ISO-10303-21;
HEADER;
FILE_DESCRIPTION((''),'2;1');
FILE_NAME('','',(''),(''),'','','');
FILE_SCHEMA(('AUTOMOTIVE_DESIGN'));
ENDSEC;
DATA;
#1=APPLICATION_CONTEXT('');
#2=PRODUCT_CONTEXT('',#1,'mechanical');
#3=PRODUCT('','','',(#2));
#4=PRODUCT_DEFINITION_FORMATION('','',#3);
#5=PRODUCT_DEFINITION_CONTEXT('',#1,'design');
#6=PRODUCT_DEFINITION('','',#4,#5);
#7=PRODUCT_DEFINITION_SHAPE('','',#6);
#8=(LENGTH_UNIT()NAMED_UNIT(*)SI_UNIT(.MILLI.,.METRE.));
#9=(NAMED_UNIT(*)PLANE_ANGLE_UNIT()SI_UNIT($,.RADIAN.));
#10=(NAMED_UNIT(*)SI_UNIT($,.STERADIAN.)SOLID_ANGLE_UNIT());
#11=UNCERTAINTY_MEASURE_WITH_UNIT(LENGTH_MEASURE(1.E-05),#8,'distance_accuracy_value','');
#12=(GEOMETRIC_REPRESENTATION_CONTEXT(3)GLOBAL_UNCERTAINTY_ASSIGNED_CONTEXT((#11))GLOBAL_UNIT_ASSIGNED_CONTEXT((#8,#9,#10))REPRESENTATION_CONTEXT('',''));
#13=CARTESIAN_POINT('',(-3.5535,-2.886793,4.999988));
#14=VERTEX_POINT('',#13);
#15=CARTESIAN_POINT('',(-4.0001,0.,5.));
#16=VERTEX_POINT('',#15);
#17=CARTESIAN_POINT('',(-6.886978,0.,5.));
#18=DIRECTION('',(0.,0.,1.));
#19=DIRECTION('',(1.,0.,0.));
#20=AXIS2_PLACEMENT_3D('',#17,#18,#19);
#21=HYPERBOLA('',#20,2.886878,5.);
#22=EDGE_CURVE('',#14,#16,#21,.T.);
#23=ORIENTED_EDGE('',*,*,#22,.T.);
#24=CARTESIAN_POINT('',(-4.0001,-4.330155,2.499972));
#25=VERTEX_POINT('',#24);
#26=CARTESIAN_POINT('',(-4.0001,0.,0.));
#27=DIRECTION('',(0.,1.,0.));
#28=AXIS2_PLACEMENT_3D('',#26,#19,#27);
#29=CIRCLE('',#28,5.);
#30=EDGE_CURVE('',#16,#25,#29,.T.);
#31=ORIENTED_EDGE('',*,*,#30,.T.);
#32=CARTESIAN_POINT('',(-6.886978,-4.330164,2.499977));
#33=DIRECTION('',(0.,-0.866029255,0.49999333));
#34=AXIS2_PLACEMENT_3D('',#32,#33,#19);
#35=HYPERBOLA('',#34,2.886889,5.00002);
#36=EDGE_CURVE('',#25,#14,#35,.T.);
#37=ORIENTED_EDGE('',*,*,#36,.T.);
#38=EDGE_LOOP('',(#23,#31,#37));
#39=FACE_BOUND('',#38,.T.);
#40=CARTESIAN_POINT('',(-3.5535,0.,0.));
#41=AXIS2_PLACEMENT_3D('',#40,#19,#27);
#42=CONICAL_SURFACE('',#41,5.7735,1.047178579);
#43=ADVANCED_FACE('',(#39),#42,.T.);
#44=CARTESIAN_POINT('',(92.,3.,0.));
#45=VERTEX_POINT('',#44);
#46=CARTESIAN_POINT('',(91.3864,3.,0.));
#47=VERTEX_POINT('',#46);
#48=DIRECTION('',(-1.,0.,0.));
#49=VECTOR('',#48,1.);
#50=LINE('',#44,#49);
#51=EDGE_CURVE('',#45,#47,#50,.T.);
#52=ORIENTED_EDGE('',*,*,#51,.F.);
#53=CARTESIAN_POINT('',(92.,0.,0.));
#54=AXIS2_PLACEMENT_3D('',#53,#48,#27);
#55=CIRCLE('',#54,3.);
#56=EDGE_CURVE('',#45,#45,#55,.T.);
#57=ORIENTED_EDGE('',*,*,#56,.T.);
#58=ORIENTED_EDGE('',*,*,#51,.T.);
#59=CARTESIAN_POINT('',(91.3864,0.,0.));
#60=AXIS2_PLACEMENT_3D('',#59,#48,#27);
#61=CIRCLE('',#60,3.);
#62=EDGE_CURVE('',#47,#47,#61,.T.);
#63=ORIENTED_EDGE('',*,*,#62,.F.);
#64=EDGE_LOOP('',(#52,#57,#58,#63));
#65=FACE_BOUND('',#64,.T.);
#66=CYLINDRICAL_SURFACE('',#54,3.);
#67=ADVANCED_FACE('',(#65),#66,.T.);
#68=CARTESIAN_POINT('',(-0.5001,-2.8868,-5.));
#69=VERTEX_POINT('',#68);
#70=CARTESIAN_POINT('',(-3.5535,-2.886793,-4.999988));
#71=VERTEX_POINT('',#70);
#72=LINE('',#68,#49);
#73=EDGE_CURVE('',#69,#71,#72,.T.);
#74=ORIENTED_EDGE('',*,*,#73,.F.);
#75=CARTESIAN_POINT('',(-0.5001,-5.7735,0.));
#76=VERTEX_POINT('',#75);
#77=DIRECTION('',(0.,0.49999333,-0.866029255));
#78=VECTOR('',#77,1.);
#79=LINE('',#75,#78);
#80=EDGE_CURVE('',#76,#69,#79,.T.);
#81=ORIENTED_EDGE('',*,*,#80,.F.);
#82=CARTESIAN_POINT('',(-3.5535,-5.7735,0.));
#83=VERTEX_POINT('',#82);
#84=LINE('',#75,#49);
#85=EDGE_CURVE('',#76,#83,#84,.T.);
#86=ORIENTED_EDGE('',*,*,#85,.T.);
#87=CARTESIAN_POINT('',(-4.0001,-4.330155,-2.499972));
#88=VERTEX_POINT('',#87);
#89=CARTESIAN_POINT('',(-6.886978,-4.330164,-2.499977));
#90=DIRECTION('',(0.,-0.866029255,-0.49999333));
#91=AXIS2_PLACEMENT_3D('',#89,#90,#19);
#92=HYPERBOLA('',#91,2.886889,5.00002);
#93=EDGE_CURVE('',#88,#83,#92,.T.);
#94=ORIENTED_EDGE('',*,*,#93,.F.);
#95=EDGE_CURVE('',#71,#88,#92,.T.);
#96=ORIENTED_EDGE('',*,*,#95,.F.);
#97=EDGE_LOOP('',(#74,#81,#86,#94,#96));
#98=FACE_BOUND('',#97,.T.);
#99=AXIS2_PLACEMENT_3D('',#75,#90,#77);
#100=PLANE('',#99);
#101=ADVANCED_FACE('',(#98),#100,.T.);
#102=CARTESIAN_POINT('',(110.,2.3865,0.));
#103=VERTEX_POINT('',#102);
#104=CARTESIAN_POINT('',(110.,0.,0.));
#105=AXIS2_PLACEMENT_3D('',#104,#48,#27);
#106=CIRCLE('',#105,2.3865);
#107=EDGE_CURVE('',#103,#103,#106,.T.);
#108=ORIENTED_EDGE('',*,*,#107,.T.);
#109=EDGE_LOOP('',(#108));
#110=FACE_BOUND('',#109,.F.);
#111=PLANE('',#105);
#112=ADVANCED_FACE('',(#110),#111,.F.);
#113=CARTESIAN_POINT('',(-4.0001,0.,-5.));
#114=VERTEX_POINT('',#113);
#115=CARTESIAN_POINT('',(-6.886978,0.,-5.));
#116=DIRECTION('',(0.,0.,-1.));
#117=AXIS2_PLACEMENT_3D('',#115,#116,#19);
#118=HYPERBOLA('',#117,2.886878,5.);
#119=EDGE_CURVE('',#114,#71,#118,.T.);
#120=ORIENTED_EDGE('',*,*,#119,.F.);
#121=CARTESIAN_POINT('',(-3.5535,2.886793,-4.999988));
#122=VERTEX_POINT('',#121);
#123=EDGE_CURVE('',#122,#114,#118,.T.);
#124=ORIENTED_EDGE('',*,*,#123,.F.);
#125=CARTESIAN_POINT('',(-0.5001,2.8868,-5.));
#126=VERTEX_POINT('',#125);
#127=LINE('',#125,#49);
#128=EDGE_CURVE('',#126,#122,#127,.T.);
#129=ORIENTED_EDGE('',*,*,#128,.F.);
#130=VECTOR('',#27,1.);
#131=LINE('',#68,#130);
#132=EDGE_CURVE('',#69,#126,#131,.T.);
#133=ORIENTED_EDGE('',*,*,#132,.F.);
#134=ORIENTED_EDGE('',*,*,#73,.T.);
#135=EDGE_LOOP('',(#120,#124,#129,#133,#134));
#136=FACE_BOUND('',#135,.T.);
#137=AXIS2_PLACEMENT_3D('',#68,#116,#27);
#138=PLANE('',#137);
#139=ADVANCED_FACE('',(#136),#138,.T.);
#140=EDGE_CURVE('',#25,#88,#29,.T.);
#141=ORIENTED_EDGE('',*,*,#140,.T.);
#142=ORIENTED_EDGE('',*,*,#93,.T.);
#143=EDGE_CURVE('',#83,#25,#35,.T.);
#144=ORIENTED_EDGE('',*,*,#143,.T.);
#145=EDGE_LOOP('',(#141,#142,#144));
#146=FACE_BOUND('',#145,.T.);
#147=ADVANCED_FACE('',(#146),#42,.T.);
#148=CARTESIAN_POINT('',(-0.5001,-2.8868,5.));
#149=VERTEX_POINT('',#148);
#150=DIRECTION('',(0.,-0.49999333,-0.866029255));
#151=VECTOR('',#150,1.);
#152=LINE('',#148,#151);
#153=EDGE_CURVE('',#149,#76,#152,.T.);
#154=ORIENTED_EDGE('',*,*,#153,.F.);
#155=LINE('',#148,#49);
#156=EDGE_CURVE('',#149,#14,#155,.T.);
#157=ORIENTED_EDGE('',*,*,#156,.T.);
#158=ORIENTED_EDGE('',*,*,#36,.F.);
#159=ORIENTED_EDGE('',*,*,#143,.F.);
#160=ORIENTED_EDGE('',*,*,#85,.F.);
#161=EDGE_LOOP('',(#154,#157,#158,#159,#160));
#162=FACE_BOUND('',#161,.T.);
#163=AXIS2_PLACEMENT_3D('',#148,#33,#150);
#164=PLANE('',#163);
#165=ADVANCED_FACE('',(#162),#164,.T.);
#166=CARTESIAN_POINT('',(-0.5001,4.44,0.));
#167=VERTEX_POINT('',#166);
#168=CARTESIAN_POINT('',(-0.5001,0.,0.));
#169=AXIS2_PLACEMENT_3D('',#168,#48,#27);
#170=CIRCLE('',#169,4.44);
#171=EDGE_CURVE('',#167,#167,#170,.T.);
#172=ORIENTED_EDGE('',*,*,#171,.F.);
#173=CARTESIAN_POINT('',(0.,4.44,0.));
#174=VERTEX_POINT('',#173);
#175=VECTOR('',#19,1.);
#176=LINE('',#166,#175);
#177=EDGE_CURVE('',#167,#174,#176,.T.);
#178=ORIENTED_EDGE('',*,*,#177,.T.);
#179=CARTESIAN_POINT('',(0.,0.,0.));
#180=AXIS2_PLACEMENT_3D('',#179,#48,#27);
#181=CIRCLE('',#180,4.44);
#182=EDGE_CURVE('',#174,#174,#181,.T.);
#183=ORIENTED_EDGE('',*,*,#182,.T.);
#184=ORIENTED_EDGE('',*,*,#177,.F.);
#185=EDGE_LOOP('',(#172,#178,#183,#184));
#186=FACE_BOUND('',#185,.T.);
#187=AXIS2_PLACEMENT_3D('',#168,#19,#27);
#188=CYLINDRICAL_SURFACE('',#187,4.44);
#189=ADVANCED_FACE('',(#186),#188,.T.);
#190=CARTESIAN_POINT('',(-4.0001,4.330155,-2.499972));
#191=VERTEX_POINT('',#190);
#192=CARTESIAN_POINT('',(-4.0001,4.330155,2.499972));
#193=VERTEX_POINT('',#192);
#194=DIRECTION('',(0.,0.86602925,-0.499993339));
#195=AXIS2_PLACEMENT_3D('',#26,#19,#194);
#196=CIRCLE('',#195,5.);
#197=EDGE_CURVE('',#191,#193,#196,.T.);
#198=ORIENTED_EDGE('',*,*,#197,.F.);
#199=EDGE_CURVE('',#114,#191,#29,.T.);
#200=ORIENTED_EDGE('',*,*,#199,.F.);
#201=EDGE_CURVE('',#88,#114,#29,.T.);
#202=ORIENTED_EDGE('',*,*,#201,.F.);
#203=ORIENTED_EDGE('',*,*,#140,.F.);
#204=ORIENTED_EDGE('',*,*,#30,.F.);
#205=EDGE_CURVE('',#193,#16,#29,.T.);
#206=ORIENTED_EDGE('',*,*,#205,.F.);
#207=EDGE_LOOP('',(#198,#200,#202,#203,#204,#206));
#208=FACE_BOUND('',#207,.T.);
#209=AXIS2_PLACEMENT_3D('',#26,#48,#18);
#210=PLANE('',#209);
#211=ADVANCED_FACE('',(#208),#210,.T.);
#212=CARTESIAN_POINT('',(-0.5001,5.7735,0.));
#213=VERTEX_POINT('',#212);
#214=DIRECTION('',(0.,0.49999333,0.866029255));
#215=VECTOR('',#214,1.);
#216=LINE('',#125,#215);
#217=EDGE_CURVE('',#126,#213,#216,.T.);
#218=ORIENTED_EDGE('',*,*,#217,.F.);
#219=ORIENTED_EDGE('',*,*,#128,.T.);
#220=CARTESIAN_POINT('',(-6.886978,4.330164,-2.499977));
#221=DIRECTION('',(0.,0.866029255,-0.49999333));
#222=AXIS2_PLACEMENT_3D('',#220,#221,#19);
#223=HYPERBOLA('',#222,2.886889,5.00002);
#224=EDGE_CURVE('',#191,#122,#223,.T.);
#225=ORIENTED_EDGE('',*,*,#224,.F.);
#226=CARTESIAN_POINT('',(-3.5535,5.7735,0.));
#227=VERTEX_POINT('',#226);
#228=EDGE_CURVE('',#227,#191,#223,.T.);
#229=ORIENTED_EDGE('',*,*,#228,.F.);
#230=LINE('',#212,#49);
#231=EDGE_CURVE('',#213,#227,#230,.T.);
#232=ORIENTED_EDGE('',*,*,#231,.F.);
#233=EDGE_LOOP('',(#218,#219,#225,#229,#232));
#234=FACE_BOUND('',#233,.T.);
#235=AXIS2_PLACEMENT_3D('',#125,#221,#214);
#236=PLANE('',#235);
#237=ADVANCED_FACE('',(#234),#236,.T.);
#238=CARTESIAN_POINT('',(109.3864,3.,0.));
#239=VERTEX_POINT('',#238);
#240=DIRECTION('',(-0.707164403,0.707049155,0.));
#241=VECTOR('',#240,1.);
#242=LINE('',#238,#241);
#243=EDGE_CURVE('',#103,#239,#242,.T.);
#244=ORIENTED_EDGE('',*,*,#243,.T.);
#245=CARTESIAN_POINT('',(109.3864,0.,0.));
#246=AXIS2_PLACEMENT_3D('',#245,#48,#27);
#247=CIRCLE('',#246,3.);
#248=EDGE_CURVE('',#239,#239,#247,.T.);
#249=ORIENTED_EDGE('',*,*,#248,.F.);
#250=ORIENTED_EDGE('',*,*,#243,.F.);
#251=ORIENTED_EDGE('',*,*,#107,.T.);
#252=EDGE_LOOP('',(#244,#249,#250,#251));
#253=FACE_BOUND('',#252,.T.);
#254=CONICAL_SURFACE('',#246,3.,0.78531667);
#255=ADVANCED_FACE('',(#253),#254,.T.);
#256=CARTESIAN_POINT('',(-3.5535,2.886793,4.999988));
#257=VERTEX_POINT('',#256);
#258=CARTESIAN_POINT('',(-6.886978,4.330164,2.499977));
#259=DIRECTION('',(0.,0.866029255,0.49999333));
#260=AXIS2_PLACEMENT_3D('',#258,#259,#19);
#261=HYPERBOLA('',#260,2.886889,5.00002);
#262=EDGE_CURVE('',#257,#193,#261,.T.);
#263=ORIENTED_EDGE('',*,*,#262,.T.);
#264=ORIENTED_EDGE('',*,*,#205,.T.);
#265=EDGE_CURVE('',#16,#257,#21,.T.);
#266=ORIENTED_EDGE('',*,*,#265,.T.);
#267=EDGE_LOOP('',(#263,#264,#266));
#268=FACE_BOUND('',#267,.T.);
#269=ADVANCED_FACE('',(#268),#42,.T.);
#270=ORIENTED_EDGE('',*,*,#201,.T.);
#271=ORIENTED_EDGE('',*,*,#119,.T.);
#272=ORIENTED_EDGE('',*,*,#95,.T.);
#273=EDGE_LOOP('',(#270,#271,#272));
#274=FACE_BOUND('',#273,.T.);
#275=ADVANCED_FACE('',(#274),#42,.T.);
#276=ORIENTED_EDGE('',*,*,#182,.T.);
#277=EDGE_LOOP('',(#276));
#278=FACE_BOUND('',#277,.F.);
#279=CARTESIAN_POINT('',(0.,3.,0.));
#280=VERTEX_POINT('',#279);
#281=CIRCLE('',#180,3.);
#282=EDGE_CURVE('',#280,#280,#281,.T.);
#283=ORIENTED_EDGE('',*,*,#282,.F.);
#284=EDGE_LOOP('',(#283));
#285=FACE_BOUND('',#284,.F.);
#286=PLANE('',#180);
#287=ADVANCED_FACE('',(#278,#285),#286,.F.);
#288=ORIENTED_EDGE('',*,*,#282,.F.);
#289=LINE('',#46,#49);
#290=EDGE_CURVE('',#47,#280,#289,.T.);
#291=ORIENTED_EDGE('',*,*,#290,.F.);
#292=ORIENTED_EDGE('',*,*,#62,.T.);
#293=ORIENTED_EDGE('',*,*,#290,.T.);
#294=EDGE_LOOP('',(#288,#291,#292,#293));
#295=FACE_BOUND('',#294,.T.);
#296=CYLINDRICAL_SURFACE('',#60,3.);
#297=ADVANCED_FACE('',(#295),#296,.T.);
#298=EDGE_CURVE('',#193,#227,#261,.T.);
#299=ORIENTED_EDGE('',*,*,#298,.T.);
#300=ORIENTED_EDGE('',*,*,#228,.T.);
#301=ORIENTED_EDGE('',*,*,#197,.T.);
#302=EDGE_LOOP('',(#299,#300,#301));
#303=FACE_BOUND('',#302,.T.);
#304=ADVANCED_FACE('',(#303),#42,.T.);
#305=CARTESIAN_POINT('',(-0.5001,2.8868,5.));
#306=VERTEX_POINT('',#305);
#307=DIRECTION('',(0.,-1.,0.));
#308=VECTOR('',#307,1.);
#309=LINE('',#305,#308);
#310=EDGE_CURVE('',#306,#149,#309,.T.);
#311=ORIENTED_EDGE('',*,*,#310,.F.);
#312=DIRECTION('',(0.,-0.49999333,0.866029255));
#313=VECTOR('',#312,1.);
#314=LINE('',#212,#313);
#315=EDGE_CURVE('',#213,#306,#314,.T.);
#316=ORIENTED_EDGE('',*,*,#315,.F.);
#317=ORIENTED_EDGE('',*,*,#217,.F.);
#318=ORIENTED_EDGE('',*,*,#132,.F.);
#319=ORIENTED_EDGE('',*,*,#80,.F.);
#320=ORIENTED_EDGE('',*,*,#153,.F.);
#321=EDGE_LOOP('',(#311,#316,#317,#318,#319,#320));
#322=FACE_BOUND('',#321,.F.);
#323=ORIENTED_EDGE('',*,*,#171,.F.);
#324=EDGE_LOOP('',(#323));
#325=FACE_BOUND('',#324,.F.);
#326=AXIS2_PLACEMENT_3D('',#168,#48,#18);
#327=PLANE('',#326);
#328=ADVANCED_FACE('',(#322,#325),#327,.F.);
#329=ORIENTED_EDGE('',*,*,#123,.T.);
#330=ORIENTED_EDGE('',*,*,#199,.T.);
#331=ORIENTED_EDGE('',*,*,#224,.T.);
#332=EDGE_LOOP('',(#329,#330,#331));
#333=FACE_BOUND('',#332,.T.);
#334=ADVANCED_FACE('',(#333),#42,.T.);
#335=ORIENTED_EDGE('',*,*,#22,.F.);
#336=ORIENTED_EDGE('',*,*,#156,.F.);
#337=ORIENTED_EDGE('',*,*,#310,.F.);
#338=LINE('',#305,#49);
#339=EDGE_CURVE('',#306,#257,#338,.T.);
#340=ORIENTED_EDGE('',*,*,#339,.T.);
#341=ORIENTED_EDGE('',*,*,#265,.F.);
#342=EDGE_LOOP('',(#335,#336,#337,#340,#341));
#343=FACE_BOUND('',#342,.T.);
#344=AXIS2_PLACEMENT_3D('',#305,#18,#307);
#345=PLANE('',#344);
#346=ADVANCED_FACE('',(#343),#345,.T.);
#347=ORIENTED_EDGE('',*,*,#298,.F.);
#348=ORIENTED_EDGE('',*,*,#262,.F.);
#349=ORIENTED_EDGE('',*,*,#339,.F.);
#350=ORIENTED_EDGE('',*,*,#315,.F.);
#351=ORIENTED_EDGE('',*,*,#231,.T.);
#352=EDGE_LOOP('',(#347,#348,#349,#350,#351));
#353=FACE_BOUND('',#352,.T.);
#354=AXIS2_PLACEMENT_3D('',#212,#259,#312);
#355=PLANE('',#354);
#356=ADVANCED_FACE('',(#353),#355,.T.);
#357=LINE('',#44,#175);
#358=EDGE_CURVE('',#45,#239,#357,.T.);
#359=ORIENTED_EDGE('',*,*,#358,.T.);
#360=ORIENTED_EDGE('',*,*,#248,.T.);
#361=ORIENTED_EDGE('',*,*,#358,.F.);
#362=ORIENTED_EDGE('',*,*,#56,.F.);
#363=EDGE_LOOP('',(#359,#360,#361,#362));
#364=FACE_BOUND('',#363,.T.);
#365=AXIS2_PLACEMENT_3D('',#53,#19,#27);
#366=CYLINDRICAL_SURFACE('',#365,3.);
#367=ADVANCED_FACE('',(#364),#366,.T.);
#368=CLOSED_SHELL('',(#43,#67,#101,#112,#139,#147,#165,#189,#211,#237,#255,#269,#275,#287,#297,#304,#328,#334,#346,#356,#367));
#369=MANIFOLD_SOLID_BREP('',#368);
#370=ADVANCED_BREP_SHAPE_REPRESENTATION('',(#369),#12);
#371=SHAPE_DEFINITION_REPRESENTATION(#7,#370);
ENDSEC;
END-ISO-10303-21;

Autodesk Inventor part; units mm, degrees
ref_plane "YZ Plane" through (0, 0, 0) normal (1, 0, 0) x (0, 1, 0)
ref_plane "XZ Plane" through (0, 0, 0) normal (0, 1, 0) x (-1, 0, 0)
sketch "Sketch1" plane through (0, 0, 0) normal (0, 0, 1) x (1, 0, 0)
  line L0 (0, 4.44) -> (0, 3)
  line L1 (92, 3) -> (110, 3)
  line L2 (110, 3) -> (110, 0)
  line L3 (110, 0) -> (-0.5001, 0)
  line L4 (-22.6001, 0) -> (132.1, 0) projected
  line L5 (-0.5001, 0) -> (-0.5001, 4.44)
  line L6 (-0.5001, 4.44) -> (0, 4.44)
  line L7 (92, 3) -> (91.3864, 3)
  line L8 (91.3864, 3) -> (0, 3)
  line L9 (0, -0.888) -> (0, 5.328) projected
  dimension "d0" = 110
  dimension "d1" = 18
  dimension "d2" = 6
  dimension "d9" = 0.5001
  dimension "d10" = 8.88
  dimension "d13" = 0.6136
  dimension "d14" = 6
revolve "Body" add sketch "Sketch1" angle 360 about axis through (110, 0, 0) along (-1, 0, 0)
sketch "Sketch2" plane through (-0.5001, 0, 0) normal (-1, 0, 0) x (0, 0, 1)
  line L0 (0, 5.7735) -> (5, 2.8868)
  line L1 (5, 2.8868) -> (5, -2.8868)
  line L2 (5, -2.8868) -> (0, -5.7735)
  line L3 (0, -5.7735) -> (-5, -2.8868)
  line L4 (-5, -2.8868) -> (-5, 2.8868)
  line L5 (-5, 2.8868) -> (0, 5.7735)
  point P0 (0, 0)
  point P1 (0, 0)
  dimension "d11" = 10
extrude "Head" add sketch "Sketch2" along normal blind 3.5
sketch "Sketch4" plane through (0, 0, 0) normal (0, 0, 1) x (1, 0, 0)
  line L0 (-4.0001, 5) -> (-4.0001, 5.7735)
  line L1 (-4.0001, 5.7735) -> (-3.5535, 5.7735)
  line L2 (-3.5535, 5.7735) -> (-4.0001, 5)
  line L3 (-4.7001, 0) -> (0.1999, 0) projected
  line L4 (-0.5001, 5.7735) -> (-4.0001, 5.7735) projected
  line L5 (-4.0001, 2.8868) -> (-4.0001, 5.7735) projected
  dimension "d5" = 30
  dimension "d19" = 10
revolve "Chamfer1" cut sketch "Sketch4" angle 360 about axis through (-10, 0, 0) along (1, 0, 0)
thread "Thread" size "M6x1" class "6g" standard "ISO Metric profile" length 18
chamfer "Chamfer2" distance 0.6135 distance2 0.6136 1 edges at (110, -3, 0) measured on face at (110, 0.3546, -0.935)
ref_plane "Work Plane1" through (1.525, 0, 0) normal (0, 0, 1) x (1, 0, 0)
equation "\"d1\" = GEL"
equation "\"d2\" = GD"
equation "\"d10\" = SD2"
equation "\"d14\" = BDM"
equation "\"d11\" = SW"
equation "\"d3\" = KOH - SD"
equation "\"d5\" = ANG1"
equation "\"d19\" = SW0"
equation "\"d15\" = GEL"
equation "\"d6\" = -0.5 * SPD + 0.5 * GD"
equation "\"GD\" = NND"
equation "\"BDM\" = NND"
equation "\"KOH\" = 4"
equation "\"GEL\" = 18"
equation "\"SW\" = 10"
equation "\"SW0\" = SW"
equation "\"SPD\" = NND - 1.2269 * PTC"
equation "\"SD2\" = 8.88"
equation "\"SD\" = 0.5"
equation "\"ANG1\" = 30deg"
equation "\"GAL\" = 0.61345 * PTC"
equation "\"GUL\" = 0.61345 * PTC"
equation "\"RR\" = 0.25"
equation "\"GD1\" = THREADDIA - 1.2269 * PTC"
equation "\"THREADDIA\" = 6"
equation "\"SDH\" = SD2"
equation "\"TOA\" = 30deg"
equation "\"PTC\" = 1"
equation "\"NND\" = 6"
equation "\"E0\" = 1.155 * SW"
properties part number "ISO 4014 - M6 x 60" material "Stainless Steel, 440C"
